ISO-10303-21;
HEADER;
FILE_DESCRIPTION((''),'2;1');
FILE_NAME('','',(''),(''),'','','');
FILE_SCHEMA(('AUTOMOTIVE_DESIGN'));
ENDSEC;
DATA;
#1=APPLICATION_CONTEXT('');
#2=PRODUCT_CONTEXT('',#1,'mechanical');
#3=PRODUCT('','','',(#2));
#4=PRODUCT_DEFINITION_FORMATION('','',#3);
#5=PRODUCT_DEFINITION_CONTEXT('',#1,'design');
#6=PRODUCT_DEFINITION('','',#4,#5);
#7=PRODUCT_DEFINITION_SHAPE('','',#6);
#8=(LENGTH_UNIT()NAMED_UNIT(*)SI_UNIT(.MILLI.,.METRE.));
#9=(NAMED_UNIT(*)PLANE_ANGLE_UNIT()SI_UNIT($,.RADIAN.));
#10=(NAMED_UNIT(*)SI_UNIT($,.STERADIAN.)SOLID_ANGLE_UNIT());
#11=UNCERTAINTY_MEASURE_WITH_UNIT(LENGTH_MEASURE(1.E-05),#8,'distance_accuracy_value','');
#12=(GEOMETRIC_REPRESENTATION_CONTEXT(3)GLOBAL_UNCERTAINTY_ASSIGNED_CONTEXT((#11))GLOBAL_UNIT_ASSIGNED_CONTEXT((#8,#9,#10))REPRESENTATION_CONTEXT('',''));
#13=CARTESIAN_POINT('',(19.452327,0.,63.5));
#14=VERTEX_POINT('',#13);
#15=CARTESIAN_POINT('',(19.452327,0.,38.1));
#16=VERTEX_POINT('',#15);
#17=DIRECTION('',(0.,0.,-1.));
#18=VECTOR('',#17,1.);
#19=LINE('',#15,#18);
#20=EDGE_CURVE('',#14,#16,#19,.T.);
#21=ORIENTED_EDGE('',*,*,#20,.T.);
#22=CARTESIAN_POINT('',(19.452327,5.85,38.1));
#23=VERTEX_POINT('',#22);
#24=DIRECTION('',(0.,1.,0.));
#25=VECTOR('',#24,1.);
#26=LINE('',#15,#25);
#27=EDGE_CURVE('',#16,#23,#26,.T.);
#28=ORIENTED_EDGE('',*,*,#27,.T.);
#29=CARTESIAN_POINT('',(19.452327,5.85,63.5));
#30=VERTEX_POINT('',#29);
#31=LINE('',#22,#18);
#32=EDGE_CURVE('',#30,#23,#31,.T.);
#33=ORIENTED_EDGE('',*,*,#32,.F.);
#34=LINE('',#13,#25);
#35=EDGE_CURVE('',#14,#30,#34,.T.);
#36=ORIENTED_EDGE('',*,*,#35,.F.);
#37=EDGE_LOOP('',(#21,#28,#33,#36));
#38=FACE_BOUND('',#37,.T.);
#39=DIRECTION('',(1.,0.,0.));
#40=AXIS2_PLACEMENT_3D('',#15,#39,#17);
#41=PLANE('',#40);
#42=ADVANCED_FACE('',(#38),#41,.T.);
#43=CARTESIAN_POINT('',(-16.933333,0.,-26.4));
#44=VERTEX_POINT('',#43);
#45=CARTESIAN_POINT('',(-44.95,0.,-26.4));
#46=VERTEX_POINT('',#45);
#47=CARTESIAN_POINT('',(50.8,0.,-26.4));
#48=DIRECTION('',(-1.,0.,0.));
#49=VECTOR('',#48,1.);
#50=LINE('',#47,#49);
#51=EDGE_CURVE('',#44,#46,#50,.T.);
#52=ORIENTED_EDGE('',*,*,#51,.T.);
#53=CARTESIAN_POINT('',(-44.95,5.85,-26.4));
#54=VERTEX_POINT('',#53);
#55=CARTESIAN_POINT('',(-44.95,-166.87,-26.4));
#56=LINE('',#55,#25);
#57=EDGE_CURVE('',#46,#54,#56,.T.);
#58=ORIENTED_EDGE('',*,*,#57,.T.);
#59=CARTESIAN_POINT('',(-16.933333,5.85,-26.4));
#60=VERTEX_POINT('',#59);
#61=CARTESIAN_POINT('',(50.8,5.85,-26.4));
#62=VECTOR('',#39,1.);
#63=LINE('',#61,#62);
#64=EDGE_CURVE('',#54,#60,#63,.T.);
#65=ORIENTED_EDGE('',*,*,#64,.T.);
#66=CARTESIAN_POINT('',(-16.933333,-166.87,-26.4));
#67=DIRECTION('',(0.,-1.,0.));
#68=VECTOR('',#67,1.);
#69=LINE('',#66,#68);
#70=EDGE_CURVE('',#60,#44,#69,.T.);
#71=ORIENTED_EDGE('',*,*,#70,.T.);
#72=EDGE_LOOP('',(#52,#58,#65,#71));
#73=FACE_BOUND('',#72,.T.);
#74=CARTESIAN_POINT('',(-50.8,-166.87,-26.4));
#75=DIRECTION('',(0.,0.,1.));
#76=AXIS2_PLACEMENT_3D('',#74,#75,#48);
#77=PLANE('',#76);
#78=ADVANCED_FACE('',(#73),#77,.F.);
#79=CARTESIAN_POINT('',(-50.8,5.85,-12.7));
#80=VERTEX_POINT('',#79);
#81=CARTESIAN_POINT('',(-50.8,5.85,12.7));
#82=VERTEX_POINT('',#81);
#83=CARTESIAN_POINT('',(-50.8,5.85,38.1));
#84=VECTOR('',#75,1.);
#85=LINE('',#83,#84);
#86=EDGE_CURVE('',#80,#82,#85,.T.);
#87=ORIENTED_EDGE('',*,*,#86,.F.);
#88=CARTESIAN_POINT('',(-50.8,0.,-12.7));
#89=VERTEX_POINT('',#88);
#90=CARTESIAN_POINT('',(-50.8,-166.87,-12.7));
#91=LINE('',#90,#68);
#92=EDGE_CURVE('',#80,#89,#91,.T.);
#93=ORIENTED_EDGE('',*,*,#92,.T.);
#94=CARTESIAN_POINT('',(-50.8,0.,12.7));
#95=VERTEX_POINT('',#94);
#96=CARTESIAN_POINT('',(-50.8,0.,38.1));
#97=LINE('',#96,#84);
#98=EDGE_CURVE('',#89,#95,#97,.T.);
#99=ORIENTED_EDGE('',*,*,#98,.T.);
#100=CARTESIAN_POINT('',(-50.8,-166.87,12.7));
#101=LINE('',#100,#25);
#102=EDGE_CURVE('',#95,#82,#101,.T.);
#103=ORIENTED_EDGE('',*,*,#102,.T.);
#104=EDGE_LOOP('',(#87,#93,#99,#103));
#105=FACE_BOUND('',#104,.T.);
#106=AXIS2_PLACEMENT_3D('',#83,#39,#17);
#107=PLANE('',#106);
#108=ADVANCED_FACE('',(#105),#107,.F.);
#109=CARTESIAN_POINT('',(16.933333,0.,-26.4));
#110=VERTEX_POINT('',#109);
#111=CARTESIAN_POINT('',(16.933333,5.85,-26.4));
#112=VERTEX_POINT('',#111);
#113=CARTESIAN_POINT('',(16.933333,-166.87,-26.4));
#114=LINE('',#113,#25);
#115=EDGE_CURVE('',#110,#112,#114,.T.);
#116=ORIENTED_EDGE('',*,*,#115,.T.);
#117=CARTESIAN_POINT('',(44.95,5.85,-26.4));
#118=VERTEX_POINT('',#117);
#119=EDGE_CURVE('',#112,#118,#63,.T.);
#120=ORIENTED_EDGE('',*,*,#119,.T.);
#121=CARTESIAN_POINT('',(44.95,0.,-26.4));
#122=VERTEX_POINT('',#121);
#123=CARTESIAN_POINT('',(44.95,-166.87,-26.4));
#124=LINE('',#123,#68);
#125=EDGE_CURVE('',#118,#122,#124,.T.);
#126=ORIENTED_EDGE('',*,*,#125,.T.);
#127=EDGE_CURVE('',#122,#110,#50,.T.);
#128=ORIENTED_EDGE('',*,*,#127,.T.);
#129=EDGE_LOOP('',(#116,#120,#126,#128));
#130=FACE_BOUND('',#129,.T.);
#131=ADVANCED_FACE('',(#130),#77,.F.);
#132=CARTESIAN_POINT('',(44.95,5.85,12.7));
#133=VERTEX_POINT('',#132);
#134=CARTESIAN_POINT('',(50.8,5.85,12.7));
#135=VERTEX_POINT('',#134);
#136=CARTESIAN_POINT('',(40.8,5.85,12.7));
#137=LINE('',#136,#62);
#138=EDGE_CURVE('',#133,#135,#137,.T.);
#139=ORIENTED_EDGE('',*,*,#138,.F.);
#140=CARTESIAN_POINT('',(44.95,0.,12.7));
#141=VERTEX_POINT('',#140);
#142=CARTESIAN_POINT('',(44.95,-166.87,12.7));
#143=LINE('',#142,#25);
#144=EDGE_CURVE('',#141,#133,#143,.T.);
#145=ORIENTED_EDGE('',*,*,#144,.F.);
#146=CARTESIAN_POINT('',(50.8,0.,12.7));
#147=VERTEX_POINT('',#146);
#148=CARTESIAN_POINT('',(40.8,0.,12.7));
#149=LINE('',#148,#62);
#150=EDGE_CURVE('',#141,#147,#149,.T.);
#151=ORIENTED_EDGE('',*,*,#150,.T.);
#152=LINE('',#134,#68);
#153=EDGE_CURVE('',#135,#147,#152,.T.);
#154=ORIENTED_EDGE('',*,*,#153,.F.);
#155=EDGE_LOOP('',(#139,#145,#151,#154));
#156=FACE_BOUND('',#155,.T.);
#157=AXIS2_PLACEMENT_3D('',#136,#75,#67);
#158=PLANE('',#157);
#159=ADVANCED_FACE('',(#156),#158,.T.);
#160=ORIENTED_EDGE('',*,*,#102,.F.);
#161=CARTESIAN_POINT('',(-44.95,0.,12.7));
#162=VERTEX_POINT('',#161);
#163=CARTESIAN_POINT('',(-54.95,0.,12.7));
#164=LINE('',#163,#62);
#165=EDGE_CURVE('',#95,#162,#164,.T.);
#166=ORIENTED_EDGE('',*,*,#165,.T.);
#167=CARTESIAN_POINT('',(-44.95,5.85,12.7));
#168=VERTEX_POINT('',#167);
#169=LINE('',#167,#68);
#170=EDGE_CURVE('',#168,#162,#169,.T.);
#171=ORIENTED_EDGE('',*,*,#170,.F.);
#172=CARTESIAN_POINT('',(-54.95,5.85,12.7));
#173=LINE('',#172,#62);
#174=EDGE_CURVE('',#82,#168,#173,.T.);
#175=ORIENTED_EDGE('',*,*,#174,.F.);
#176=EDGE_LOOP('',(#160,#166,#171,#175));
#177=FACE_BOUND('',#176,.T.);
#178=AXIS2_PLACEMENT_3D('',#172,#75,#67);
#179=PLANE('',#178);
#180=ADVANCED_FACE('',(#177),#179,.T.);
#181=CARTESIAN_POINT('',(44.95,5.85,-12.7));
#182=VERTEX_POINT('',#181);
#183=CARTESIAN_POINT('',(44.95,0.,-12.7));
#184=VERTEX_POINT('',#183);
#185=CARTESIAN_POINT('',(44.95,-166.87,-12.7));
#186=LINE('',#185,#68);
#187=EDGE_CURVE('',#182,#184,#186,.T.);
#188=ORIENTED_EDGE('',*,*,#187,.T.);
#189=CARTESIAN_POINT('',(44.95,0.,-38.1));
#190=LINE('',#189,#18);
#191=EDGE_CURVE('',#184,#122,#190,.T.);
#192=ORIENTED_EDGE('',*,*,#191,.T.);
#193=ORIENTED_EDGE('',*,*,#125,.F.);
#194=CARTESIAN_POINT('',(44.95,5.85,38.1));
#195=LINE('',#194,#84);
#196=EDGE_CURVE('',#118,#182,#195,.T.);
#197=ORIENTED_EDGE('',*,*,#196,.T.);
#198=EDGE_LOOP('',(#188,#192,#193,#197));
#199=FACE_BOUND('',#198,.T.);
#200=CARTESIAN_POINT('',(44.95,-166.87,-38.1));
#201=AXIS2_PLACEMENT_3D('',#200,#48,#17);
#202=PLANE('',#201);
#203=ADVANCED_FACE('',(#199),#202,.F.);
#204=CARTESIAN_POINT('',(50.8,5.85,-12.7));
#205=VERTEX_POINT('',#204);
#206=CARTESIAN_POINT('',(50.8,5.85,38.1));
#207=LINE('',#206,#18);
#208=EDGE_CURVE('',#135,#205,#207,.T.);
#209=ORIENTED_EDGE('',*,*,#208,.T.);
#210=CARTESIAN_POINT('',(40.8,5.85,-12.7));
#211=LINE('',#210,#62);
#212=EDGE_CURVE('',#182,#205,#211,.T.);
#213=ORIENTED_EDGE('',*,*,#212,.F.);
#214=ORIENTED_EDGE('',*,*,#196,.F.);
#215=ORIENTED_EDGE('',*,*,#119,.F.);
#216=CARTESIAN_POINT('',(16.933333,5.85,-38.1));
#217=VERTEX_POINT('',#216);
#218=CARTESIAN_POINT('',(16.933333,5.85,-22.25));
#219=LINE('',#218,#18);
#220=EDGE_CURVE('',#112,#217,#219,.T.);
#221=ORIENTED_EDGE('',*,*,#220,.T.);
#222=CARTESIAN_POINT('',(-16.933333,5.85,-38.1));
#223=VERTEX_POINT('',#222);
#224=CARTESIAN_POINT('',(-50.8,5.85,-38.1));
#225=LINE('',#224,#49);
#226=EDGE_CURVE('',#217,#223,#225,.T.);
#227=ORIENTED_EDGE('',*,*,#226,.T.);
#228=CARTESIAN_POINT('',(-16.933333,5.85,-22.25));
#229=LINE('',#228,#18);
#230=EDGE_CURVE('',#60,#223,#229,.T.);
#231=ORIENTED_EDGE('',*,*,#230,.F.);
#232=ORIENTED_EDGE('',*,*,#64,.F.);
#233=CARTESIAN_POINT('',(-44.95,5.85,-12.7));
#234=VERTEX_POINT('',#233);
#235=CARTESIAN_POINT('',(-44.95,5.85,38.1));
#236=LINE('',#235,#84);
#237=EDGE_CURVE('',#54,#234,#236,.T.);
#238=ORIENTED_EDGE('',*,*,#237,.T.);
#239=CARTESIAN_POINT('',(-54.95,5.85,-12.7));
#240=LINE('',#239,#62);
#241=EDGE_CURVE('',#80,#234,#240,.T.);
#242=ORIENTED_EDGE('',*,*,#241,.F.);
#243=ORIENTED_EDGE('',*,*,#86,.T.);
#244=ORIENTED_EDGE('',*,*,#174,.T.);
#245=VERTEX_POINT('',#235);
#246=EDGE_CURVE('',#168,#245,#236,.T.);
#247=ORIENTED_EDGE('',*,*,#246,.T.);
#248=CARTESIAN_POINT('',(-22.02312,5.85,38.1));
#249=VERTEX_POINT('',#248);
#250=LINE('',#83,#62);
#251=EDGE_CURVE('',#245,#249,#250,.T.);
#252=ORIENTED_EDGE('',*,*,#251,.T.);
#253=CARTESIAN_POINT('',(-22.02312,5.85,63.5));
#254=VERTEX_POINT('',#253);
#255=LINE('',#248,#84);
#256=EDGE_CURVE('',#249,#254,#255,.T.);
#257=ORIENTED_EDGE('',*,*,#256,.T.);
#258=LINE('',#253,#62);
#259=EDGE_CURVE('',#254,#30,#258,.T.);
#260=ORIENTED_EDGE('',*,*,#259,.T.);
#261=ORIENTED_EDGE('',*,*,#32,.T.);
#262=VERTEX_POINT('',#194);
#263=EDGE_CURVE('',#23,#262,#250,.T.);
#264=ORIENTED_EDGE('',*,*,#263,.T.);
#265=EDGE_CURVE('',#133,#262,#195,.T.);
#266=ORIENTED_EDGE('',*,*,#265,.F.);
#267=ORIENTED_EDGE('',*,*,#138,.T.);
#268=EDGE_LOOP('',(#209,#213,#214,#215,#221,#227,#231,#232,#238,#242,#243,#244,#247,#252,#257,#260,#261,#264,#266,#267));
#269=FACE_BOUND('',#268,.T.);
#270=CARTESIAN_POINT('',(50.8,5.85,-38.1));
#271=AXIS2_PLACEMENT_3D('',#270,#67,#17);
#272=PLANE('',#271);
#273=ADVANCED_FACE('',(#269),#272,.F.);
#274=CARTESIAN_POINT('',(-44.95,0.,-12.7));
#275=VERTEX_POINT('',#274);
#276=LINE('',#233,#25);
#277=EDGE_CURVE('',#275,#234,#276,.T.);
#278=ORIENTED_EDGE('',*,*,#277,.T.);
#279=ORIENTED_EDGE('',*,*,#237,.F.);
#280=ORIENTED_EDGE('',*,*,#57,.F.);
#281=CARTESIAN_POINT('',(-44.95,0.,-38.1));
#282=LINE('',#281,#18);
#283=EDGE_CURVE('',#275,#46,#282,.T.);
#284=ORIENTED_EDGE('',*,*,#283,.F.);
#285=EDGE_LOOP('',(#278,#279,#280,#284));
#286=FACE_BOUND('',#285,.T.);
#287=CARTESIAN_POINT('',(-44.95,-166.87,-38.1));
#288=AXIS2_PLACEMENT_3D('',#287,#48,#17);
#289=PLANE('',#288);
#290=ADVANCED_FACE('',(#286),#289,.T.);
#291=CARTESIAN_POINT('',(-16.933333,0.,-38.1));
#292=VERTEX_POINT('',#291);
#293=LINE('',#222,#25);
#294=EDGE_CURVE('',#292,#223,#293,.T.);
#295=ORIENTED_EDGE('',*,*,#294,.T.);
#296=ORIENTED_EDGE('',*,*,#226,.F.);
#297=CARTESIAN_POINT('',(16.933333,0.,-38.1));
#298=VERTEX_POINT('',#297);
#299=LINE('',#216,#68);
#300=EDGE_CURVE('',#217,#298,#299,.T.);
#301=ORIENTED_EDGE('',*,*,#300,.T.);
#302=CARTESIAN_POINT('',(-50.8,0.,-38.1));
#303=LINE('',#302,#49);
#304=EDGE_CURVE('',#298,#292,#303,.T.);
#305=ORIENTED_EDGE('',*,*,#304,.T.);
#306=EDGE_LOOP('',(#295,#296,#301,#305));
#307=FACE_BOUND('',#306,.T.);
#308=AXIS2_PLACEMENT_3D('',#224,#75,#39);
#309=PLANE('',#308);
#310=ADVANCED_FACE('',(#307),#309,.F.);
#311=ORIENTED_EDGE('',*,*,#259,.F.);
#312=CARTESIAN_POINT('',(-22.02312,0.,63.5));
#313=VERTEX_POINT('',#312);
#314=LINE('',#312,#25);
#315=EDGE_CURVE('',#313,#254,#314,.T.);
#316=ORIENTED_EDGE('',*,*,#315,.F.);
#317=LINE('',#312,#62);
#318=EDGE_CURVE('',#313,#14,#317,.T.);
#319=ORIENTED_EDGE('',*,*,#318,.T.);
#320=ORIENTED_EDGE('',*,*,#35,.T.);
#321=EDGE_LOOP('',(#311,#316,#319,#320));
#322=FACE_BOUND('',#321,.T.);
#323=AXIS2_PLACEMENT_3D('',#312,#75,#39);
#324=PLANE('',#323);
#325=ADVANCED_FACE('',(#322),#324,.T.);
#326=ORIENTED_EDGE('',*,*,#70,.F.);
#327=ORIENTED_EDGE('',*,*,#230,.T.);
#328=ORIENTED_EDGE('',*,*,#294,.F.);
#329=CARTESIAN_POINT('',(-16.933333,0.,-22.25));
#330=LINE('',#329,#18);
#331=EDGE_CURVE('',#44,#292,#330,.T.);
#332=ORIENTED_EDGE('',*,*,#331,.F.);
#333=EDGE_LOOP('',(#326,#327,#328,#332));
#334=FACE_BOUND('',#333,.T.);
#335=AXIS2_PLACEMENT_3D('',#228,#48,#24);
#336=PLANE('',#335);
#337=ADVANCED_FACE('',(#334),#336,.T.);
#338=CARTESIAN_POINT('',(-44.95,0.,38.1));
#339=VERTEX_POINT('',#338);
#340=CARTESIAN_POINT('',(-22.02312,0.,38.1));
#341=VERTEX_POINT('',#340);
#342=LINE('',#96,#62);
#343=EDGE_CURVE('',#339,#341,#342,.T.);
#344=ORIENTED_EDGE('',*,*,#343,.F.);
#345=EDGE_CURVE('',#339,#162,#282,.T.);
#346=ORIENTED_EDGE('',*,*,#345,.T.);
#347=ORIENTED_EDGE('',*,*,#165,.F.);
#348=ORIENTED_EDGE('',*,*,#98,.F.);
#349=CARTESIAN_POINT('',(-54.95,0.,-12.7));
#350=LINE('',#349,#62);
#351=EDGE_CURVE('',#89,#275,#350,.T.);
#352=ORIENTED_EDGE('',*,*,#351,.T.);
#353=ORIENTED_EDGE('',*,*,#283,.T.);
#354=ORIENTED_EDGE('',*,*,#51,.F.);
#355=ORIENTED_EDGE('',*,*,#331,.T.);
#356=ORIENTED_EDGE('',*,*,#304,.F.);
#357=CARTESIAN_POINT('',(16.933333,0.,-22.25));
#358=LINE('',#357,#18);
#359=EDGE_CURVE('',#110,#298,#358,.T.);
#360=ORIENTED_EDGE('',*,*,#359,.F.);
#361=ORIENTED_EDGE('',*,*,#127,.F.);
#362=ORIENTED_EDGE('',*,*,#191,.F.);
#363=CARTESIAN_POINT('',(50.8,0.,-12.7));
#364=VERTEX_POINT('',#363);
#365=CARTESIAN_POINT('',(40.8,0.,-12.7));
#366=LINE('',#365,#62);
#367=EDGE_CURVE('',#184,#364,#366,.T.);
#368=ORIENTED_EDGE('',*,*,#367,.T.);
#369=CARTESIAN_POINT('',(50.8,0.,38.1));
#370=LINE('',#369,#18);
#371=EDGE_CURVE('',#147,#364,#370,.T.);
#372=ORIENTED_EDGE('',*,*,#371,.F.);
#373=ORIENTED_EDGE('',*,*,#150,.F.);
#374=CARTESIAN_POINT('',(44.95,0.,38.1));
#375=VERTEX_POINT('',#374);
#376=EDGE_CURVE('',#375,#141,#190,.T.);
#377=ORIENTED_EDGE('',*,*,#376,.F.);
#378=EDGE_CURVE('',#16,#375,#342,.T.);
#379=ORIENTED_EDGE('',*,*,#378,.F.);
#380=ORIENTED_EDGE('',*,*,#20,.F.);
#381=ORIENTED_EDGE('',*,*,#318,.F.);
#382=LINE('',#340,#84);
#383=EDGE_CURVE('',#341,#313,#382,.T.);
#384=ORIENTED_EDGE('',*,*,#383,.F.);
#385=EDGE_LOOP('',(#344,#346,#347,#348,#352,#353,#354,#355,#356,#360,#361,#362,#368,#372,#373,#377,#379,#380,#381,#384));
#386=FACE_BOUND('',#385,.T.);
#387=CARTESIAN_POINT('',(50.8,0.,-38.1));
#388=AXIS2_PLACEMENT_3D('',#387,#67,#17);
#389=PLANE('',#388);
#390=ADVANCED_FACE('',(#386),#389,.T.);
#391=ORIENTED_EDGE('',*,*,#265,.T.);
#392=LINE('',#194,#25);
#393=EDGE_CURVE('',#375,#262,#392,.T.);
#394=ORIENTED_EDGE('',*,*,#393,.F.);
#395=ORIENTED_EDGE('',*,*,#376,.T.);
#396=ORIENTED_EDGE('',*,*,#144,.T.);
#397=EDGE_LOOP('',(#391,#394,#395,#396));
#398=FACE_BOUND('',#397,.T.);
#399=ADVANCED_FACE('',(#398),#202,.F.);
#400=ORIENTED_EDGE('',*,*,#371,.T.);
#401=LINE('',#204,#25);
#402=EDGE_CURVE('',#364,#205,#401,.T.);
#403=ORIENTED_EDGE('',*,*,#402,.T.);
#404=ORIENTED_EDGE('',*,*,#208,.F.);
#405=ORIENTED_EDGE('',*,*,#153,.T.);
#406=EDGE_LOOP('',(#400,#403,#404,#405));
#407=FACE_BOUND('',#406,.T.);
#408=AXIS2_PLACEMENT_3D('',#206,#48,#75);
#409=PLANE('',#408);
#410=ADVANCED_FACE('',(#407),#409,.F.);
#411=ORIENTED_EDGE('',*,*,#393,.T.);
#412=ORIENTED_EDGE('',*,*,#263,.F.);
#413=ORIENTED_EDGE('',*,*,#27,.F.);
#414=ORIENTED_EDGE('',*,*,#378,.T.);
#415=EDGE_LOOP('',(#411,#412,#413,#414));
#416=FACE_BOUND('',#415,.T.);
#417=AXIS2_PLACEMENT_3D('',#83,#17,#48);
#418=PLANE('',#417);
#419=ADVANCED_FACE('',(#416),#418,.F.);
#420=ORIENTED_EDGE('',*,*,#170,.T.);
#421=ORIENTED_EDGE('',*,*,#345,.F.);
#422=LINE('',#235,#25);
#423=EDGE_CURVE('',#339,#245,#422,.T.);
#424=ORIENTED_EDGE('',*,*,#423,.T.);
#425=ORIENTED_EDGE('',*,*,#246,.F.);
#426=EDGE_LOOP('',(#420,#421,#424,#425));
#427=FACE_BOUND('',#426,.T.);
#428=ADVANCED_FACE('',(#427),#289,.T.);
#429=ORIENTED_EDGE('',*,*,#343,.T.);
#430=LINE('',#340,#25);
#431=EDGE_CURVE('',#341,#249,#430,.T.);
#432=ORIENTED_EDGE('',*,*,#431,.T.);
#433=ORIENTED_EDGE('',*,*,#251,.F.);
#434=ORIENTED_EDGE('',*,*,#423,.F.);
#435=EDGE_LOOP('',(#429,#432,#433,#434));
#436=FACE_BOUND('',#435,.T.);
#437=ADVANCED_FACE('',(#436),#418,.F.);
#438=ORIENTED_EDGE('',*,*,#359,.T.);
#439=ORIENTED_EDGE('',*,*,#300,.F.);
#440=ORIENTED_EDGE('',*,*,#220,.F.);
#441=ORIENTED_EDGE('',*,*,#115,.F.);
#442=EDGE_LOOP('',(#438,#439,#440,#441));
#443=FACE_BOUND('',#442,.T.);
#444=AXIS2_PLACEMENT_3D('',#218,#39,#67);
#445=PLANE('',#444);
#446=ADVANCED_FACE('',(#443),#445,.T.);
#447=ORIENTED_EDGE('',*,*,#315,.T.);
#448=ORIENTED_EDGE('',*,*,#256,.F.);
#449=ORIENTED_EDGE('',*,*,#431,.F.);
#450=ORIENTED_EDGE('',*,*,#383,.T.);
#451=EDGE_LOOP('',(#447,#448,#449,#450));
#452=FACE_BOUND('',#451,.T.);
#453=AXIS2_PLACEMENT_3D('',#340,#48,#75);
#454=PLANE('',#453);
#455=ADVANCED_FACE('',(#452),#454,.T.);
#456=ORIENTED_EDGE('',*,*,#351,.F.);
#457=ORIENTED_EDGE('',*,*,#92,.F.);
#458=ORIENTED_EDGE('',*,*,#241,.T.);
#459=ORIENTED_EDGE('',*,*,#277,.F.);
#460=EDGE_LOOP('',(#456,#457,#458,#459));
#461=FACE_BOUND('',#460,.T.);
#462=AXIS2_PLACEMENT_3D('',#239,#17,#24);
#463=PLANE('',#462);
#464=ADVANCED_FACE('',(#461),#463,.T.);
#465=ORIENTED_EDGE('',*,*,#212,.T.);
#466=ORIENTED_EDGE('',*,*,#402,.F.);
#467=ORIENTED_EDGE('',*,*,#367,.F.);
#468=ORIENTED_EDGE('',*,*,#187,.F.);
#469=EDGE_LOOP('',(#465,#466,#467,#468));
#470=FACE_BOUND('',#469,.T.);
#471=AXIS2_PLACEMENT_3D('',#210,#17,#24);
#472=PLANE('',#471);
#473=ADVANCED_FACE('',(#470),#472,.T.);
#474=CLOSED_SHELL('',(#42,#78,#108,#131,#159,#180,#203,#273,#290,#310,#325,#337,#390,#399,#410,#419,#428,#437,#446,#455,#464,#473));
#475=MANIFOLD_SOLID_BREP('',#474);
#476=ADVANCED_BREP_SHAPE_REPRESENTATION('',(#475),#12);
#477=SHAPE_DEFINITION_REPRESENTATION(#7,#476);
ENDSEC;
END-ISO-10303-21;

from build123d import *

# Parameters (mm, degrees)
SKETCH1_W           = 101.6
SKETCH1_H           = 76.2
BOSS_EXTRUDE1_DEPTH = 5.85
SKETCH2_W           = 41.475447085
SKETCH2_H           = 25.4
BOSS_EXTRUDE2_DEPTH = 5.85
CAVITY1_START       = -38.1
CAVITY1_OUTLINE_W   = 33.866666667
CAVITY1_OUTLINE_H   = 5.85
CAVITY1_DEPTH       = 11.7
CAVITY1_START_2     = 12.7
CAVITY1_2_OUTLINE_W = 5.85
CAVITY1_2_OUTLINE_H = 5.85
CAVITY1_2_DEPTH     = 25.4
CAVITY1_START_3     = -26.4
CAVITY1_3_OUTLINE_W = 5.85
CAVITY1_3_OUTLINE_H = 5.85
CAVITY1_3_DEPTH     = 13.7


# Read off the part's stored shape, not the designer's step: Cavity1
with BuildPart() as part:
    # Sketch1 → Boss-Extrude1 (new body)
    with BuildSketch(Plane(origin=(0, 0, 0), x_dir=(1, 0, 0), z_dir=(0, 1, 0))):
        Rectangle(SKETCH1_W, SKETCH1_H)
    extrude(amount=BOSS_EXTRUDE1_DEPTH)

    # Sketch2 → Boss-Extrude2 (add)
    with BuildSketch(Plane(origin=(0, 5.85, 0), x_dir=(1, 0, 0), z_dir=(0, 1, 0))):
        with Locations((-1.285396087, -50.8)):
            Rectangle(SKETCH2_W, SKETCH2_H)
    extrude(amount=-BOSS_EXTRUDE2_DEPTH)

    # Cavity1 outline → Cavity1 (cut)
    with BuildSketch(Plane.XY.offset(CAVITY1_START)):
        with Locations((33.866666667, 2.925)):
            Rectangle(CAVITY1_OUTLINE_W, CAVITY1_OUTLINE_H)
        with Locations((-33.866666667, 2.925)):
            Rectangle(CAVITY1_OUTLINE_W, CAVITY1_OUTLINE_H)
    extrude(amount=CAVITY1_DEPTH, mode=Mode.SUBTRACT)

    # Cavity1 2 outline → Cavity1 2 (cut)
    with BuildSketch(Plane.XY.offset(CAVITY1_START_2)):
        with Locations((47.875, 2.925)):
            Rectangle(CAVITY1_2_OUTLINE_W, CAVITY1_2_OUTLINE_H)
        with Locations((-47.875, 2.925)):
            Rectangle(CAVITY1_2_OUTLINE_W, CAVITY1_2_OUTLINE_H)
    extrude(amount=CAVITY1_2_DEPTH, mode=Mode.SUBTRACT)

    # Cavity1 3 outline → Cavity1 3 (cut)
    with BuildSketch(Plane.XY.offset(CAVITY1_START_3)):
        with Locations((47.875, 2.925)):
            Rectangle(CAVITY1_3_OUTLINE_W, CAVITY1_3_OUTLINE_H)
        with Locations((-47.875, 2.925)):
            Rectangle(CAVITY1_3_OUTLINE_W, CAVITY1_3_OUTLINE_H)
    extrude(amount=CAVITY1_3_DEPTH, mode=Mode.SUBTRACT)


solid = part.part
